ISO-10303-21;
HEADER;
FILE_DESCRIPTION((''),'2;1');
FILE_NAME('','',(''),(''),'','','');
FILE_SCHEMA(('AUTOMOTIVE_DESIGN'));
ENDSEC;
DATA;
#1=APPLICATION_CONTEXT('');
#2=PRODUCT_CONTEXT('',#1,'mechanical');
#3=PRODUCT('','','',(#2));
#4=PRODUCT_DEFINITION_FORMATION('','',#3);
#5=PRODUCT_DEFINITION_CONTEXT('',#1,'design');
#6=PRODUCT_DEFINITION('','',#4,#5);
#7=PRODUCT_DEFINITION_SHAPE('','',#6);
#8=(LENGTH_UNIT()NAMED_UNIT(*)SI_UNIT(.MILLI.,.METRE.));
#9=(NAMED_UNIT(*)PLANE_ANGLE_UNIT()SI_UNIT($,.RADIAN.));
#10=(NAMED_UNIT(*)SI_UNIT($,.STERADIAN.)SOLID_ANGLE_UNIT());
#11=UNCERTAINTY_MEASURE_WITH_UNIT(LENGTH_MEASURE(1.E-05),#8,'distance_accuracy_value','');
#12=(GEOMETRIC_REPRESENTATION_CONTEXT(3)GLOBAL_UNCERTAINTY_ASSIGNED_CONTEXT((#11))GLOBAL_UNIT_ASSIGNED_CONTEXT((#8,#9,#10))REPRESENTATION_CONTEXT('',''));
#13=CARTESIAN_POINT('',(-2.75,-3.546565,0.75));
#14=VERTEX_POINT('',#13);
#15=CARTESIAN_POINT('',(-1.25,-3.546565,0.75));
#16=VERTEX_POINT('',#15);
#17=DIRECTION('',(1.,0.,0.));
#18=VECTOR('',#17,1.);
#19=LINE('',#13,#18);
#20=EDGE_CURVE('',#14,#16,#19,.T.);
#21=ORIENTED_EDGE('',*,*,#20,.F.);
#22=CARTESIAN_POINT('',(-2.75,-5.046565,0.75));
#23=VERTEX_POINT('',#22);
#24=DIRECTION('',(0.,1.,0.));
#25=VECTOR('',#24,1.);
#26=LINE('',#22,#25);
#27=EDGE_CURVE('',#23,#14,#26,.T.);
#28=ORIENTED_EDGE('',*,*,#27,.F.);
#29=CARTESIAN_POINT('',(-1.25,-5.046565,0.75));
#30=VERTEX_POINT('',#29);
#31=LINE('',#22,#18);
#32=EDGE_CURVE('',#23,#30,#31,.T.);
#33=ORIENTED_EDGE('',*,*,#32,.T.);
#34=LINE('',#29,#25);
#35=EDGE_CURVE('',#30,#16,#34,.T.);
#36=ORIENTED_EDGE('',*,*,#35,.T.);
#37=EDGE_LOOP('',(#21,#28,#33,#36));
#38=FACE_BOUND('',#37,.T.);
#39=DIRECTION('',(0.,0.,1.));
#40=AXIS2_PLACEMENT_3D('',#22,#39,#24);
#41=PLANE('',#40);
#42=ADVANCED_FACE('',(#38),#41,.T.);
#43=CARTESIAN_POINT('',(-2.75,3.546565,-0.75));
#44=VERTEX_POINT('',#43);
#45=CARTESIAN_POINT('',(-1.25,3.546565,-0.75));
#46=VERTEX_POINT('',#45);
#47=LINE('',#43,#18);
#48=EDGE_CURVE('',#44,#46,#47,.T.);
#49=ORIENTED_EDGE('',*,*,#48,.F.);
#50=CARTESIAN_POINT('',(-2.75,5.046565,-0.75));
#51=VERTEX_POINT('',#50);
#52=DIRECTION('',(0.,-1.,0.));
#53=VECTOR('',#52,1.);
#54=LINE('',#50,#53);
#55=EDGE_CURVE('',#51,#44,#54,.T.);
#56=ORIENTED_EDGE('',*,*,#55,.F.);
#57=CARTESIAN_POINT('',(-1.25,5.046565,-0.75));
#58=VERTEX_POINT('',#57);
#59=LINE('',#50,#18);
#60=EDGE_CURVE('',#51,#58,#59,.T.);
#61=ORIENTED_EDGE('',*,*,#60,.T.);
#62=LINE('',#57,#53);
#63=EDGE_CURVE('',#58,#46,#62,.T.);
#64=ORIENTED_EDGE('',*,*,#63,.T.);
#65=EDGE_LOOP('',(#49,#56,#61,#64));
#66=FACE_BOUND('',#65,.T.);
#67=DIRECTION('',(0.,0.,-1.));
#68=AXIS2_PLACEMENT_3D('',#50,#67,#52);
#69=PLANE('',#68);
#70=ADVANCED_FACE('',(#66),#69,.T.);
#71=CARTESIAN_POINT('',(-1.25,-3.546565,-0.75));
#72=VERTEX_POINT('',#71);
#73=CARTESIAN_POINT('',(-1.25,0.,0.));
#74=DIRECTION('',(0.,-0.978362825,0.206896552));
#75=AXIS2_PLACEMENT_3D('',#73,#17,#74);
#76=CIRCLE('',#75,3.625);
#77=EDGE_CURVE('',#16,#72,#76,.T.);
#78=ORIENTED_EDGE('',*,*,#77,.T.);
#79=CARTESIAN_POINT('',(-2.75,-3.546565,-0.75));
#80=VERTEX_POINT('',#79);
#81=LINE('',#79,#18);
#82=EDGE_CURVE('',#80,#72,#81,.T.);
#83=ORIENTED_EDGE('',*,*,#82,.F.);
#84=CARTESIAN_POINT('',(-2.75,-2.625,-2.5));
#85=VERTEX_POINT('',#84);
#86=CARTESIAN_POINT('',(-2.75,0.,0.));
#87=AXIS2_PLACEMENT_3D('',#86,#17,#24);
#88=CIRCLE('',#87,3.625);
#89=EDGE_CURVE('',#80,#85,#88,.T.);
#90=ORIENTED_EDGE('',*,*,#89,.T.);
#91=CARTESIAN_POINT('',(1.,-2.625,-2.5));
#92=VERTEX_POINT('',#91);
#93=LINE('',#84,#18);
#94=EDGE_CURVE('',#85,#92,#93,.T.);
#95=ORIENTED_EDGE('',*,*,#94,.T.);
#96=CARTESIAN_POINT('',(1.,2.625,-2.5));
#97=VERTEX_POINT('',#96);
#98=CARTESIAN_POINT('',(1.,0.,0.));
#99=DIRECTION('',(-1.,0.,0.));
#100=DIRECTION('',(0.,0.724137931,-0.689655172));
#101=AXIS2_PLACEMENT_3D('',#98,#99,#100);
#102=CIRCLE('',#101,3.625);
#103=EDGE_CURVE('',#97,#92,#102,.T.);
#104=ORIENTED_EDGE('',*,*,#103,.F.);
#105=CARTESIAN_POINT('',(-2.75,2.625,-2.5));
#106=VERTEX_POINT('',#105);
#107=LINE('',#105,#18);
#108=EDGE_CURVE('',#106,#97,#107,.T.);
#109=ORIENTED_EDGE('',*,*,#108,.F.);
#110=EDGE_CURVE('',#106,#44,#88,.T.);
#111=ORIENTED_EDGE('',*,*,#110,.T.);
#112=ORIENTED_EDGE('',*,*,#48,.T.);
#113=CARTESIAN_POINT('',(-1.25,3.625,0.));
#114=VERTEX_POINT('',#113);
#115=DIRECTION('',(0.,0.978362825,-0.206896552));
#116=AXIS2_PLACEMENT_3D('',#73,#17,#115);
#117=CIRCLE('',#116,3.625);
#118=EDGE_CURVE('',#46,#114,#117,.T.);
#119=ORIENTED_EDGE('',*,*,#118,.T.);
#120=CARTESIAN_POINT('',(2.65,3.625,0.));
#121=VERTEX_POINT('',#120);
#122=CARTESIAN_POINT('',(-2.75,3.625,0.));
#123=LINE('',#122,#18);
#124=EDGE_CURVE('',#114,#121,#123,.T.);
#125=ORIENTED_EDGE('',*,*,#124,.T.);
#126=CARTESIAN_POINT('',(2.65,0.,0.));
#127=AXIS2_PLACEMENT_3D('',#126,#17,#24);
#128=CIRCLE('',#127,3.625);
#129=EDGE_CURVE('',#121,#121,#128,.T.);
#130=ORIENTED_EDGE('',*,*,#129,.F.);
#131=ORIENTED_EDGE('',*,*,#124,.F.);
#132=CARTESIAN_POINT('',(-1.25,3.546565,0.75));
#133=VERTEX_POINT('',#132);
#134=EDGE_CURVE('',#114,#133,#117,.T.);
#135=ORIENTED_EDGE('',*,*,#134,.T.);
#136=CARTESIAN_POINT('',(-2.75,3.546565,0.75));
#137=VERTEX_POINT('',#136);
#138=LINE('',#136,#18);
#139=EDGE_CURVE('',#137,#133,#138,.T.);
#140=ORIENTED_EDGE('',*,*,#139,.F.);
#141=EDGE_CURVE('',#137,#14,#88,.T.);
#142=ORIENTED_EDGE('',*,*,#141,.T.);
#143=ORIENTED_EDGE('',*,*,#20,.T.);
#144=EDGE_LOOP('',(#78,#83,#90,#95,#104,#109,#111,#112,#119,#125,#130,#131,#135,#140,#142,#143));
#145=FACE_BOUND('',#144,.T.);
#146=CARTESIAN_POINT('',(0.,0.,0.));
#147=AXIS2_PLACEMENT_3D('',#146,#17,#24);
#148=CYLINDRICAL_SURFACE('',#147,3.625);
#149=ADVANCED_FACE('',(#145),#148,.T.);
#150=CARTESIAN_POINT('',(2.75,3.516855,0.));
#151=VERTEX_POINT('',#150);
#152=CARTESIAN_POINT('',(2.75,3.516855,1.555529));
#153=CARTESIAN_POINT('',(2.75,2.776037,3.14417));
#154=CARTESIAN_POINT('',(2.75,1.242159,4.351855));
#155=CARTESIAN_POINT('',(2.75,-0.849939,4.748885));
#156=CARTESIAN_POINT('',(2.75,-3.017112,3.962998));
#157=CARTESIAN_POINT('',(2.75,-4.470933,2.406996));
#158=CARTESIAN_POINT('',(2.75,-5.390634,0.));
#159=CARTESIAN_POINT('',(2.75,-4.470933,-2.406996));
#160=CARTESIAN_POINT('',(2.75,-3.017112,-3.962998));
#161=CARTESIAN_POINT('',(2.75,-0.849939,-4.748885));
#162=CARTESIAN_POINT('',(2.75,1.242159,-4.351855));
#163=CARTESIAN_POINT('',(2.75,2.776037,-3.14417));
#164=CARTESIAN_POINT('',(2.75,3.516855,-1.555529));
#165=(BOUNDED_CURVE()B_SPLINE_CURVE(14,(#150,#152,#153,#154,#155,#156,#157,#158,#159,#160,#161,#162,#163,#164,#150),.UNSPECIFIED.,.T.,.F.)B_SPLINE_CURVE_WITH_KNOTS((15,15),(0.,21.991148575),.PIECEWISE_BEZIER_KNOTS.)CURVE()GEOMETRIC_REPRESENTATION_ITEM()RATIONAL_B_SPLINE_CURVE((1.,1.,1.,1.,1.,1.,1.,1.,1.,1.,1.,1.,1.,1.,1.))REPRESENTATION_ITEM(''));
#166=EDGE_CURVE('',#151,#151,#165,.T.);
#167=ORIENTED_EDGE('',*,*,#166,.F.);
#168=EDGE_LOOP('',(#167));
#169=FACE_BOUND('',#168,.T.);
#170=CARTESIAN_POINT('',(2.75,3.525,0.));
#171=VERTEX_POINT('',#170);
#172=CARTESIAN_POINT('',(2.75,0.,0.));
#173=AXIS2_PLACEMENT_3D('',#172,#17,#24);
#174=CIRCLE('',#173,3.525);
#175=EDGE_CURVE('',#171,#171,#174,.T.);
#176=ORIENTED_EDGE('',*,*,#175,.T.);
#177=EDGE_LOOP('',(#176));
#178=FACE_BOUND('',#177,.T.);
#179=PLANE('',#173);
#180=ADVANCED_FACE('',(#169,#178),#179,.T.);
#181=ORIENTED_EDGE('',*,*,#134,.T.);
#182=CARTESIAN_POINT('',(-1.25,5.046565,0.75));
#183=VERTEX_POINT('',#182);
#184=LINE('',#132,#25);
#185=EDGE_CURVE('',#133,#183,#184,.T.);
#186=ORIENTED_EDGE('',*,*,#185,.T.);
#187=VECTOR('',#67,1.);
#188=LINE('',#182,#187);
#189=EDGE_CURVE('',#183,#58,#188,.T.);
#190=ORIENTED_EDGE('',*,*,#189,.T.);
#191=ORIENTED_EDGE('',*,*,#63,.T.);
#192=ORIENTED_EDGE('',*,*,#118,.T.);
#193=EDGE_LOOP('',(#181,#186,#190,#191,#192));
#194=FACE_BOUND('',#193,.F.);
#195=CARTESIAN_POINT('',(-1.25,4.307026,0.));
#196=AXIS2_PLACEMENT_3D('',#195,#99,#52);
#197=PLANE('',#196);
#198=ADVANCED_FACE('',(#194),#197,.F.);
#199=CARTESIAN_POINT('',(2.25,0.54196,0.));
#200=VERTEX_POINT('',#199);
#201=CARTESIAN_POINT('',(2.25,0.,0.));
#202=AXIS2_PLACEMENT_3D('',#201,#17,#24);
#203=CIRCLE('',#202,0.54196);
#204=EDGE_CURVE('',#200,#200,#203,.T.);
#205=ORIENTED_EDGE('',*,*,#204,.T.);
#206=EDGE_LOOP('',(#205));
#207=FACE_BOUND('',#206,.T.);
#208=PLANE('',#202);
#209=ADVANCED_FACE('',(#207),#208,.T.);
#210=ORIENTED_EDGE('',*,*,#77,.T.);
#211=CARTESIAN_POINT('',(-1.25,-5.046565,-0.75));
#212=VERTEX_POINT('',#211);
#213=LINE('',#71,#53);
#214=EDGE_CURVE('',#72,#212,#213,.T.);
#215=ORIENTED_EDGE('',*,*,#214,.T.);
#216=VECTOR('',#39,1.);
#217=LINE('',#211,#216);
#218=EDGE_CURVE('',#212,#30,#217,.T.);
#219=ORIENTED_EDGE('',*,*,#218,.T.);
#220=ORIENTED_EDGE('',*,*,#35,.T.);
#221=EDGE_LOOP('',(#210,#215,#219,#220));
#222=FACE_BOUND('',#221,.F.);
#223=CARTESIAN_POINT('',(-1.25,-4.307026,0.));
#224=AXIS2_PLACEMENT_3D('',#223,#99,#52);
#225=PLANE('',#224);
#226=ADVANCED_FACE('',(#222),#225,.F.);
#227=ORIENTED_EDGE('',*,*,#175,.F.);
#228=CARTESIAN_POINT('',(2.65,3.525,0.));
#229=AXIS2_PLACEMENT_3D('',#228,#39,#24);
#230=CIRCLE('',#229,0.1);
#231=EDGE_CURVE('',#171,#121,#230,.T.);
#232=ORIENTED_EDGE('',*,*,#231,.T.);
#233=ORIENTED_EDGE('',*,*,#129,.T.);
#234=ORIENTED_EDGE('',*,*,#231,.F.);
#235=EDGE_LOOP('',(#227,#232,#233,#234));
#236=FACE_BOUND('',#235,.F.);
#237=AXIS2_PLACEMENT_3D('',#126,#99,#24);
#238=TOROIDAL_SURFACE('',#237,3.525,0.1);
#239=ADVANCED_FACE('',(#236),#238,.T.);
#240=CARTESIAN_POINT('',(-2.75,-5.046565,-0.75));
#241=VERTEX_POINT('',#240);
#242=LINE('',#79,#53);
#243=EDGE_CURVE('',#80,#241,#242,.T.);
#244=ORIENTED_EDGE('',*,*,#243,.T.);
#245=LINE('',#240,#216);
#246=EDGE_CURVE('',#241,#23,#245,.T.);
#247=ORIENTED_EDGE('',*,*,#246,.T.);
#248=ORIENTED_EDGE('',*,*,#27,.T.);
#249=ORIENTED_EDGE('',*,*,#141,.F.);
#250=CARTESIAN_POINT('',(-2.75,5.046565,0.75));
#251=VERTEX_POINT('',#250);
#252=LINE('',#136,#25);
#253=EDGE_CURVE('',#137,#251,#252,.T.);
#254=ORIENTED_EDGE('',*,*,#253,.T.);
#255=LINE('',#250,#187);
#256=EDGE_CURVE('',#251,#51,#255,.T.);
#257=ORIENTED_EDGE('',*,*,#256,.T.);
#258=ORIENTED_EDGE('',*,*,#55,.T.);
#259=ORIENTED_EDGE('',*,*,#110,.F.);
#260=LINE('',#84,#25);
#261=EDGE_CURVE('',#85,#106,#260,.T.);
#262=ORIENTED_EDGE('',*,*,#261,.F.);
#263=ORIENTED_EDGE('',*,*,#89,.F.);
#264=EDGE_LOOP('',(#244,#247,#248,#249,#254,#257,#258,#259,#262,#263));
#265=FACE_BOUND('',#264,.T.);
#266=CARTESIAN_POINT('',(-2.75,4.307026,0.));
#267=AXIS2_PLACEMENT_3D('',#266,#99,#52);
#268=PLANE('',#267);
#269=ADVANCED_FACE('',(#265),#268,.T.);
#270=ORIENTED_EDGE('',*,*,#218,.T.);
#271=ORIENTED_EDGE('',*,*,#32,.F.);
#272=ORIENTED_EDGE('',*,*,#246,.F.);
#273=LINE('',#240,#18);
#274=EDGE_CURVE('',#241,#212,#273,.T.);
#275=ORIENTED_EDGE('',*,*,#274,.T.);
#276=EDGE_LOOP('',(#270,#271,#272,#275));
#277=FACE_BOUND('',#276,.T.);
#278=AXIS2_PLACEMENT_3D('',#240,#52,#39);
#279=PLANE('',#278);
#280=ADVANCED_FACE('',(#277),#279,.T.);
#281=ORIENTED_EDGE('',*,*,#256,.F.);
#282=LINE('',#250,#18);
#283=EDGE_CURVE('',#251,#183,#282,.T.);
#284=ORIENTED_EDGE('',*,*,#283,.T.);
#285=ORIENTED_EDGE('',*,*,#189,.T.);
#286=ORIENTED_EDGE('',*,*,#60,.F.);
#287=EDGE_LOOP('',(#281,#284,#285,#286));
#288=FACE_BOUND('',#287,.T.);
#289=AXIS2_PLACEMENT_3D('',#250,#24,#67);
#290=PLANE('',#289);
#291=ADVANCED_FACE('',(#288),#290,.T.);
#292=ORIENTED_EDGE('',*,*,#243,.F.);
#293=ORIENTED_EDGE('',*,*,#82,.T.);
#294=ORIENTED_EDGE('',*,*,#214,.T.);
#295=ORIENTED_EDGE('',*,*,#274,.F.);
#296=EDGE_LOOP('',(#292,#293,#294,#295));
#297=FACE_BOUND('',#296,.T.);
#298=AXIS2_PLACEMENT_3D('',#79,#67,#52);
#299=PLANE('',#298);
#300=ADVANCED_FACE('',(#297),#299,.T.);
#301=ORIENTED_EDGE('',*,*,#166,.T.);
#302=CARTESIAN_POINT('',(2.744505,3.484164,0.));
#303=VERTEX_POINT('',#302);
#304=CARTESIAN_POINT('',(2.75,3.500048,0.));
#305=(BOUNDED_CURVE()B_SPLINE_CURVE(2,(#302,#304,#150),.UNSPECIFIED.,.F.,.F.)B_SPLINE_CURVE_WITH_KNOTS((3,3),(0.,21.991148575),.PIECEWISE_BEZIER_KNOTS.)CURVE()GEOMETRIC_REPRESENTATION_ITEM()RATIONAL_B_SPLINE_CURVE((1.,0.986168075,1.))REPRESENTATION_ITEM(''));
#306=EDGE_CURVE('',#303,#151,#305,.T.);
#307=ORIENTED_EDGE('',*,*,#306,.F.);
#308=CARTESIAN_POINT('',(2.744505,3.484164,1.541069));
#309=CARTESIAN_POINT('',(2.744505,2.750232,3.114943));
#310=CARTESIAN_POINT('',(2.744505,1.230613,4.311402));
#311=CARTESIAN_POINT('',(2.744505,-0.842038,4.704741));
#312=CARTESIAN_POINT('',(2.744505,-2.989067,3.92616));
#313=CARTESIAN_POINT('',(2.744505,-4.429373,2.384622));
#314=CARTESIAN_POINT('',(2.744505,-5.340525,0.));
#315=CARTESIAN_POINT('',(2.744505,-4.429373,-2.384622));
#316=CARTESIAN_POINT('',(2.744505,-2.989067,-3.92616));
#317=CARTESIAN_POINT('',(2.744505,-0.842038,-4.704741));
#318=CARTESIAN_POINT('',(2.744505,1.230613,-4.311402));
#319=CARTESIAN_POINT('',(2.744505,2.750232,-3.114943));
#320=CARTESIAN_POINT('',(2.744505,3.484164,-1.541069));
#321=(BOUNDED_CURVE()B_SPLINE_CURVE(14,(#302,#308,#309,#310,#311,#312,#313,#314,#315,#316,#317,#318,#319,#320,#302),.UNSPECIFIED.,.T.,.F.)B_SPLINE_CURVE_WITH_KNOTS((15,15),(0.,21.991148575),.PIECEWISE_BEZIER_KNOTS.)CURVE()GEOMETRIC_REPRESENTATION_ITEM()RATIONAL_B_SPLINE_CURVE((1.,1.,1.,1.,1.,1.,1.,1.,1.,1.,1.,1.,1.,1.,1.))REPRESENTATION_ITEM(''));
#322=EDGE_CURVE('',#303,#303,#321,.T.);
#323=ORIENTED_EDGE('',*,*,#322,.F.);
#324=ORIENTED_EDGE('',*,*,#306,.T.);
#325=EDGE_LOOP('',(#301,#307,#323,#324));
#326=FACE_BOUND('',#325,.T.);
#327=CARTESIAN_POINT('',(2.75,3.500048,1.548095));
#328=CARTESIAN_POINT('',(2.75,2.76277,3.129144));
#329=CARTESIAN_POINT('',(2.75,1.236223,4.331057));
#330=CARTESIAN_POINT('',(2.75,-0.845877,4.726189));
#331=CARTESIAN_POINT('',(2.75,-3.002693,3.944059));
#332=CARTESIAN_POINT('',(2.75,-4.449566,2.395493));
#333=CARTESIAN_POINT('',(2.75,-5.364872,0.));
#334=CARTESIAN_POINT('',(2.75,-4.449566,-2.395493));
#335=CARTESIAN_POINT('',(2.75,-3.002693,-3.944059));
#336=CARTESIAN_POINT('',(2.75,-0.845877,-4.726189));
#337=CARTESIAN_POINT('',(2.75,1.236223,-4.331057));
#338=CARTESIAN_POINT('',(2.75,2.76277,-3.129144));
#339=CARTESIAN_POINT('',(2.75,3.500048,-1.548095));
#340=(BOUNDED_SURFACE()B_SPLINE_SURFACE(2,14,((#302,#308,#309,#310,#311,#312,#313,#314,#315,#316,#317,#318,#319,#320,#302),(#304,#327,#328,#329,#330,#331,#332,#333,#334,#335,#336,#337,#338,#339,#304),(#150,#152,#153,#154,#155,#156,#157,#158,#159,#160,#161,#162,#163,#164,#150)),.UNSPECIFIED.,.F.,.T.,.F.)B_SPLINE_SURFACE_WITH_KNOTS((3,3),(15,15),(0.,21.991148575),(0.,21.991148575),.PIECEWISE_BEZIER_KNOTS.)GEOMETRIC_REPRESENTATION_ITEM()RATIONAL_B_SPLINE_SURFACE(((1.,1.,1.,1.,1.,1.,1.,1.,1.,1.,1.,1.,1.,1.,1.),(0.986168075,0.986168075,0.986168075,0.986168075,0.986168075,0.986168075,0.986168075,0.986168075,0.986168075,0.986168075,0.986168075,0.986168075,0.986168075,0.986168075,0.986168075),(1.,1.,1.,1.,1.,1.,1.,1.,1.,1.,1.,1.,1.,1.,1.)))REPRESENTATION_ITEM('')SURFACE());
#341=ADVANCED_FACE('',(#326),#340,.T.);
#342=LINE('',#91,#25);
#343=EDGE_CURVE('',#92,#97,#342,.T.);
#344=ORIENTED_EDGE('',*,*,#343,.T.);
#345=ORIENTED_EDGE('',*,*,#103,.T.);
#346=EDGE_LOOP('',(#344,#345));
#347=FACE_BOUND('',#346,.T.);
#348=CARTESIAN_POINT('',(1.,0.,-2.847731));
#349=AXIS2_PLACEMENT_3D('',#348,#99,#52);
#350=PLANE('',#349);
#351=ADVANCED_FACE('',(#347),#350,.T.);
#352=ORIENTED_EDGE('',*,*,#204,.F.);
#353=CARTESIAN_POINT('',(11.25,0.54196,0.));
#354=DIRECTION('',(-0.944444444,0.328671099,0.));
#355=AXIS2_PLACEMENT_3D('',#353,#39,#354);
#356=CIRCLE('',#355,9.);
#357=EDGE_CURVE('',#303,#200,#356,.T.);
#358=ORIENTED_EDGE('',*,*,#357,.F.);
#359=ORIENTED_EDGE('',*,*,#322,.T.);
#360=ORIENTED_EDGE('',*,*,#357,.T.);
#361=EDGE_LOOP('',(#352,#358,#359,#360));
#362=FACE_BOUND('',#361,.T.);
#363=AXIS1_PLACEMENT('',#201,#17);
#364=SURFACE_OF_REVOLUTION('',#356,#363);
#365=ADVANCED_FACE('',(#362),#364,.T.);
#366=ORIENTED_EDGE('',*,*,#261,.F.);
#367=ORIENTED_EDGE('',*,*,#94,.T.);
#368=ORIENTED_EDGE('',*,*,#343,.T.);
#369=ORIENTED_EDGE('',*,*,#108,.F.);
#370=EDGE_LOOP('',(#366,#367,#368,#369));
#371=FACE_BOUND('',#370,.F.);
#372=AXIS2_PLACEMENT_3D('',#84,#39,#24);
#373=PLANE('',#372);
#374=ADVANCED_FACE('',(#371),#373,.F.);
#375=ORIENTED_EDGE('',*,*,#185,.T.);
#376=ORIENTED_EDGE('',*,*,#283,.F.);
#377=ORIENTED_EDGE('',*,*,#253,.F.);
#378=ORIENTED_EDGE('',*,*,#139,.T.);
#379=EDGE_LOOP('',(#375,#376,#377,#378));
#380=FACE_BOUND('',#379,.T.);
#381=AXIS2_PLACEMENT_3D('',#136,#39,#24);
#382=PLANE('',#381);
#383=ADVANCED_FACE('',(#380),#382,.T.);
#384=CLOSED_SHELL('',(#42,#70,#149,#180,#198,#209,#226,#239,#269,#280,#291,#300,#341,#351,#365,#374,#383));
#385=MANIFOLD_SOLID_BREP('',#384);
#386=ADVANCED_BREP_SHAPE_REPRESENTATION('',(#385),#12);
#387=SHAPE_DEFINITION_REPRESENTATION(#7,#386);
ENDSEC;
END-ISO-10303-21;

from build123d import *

# Parameters (mm, degrees)
F0_R     = 3.625
F1_DEPTH = 2.75
F3_DEPTH = 1.5
F4_R     = 3.5
F5_DEPTH = 0.5
F7_DEPTH = 3.75
F9_R     = 0.1


# Not quite as in the source:
# - a fillet or chamfer that OpenCascade refuses, or shapes differently, is made with other operations: its cross-section is extruded or revolved along the edge and cut away or added


with BuildPart() as f1:
    # F0 (on Right) → F1 (new body, symmetric)
    with BuildSketch(Plane.YZ):
        Circle(F0_R)
    extrude(amount=F1_DEPTH, both=True)

    # F2 (on face) → F3 (join)
    with BuildSketch(Plane(origin=(-2.75, 0, 0), x_dir=(0, -1, 0), z_dir=(-1, 0, 0))):
        with BuildLine():
            Line((3.5465652398, -0.75), (5.0465652398, -0.75))
            Line((5.0465652398, -0.75), (5.0465652398, 0.75))
            Line((5.0465652398, 0.75), (3.5465652398, 0.75))
            ThreePointArc((3.5465652398, 0.75), (3.625, 0), (3.5465652398, -0.75))
        make_face()
        with BuildLine():
            Line((-3.5465652398, 0.75), (-5.0465652398, 0.75))
            Line((-5.0465652398, 0.75), (-5.0465652398, -0.75))
            Line((-5.0465652398, -0.75), (-3.5465652398, -0.75))
            ThreePointArc((-3.5465652398, -0.75), (-3.625, 0), (-3.5465652398, 0.75))
        make_face()
    extrude(amount=-F3_DEPTH)

    # F4 (on face) → F5 (cut)
    with BuildSketch(Plane.YZ.offset(2.75)):
        Circle(F4_R)
    extrude(amount=-F5_DEPTH, mode=Mode.SUBTRACT)

    # F6 (on face) → F7 (cut)
    with BuildSketch(Plane(origin=(-2.75, 0, 0), x_dir=(0, -1, 0), z_dir=(-1, 0, 0))):
        with BuildLine():
            Line((2.625, -2.5), (-2.625, -2.5))
            ThreePointArc((-2.625, -2.5), (0, -3.625), (2.625, -2.5))
        make_face()
    extrude(amount=-F7_DEPTH, mode=Mode.SUBTRACT)

    # F8: fillet of radius 9 on 1 edges, made by hand

    # F8_s1 → F8_t2 (revolve)
    with BuildSketch(Plane.XY):
        with BuildLine():
            ThreePointArc((2.75, 3.5), (2.3758803254, 2.0419601084), (2.25, 0.5419601084))
            Line((2.25, 0.5419601084), (2.25, 3.5))
            Line((2.25, 3.5), (2.75, 3.5))
        make_face()
    revolve(axis=Axis((2.25, 0, 0), (1, 0, 0)))

    # F9
    f9_edges = [f1.edges().sort_by_distance(p)[0] for p in [
        (2.75, -3.5, 0),
        (2.75, -3.625, 0),
    ]]
    fillet(f9_edges, radius=F9_R)


solid = f1.part
